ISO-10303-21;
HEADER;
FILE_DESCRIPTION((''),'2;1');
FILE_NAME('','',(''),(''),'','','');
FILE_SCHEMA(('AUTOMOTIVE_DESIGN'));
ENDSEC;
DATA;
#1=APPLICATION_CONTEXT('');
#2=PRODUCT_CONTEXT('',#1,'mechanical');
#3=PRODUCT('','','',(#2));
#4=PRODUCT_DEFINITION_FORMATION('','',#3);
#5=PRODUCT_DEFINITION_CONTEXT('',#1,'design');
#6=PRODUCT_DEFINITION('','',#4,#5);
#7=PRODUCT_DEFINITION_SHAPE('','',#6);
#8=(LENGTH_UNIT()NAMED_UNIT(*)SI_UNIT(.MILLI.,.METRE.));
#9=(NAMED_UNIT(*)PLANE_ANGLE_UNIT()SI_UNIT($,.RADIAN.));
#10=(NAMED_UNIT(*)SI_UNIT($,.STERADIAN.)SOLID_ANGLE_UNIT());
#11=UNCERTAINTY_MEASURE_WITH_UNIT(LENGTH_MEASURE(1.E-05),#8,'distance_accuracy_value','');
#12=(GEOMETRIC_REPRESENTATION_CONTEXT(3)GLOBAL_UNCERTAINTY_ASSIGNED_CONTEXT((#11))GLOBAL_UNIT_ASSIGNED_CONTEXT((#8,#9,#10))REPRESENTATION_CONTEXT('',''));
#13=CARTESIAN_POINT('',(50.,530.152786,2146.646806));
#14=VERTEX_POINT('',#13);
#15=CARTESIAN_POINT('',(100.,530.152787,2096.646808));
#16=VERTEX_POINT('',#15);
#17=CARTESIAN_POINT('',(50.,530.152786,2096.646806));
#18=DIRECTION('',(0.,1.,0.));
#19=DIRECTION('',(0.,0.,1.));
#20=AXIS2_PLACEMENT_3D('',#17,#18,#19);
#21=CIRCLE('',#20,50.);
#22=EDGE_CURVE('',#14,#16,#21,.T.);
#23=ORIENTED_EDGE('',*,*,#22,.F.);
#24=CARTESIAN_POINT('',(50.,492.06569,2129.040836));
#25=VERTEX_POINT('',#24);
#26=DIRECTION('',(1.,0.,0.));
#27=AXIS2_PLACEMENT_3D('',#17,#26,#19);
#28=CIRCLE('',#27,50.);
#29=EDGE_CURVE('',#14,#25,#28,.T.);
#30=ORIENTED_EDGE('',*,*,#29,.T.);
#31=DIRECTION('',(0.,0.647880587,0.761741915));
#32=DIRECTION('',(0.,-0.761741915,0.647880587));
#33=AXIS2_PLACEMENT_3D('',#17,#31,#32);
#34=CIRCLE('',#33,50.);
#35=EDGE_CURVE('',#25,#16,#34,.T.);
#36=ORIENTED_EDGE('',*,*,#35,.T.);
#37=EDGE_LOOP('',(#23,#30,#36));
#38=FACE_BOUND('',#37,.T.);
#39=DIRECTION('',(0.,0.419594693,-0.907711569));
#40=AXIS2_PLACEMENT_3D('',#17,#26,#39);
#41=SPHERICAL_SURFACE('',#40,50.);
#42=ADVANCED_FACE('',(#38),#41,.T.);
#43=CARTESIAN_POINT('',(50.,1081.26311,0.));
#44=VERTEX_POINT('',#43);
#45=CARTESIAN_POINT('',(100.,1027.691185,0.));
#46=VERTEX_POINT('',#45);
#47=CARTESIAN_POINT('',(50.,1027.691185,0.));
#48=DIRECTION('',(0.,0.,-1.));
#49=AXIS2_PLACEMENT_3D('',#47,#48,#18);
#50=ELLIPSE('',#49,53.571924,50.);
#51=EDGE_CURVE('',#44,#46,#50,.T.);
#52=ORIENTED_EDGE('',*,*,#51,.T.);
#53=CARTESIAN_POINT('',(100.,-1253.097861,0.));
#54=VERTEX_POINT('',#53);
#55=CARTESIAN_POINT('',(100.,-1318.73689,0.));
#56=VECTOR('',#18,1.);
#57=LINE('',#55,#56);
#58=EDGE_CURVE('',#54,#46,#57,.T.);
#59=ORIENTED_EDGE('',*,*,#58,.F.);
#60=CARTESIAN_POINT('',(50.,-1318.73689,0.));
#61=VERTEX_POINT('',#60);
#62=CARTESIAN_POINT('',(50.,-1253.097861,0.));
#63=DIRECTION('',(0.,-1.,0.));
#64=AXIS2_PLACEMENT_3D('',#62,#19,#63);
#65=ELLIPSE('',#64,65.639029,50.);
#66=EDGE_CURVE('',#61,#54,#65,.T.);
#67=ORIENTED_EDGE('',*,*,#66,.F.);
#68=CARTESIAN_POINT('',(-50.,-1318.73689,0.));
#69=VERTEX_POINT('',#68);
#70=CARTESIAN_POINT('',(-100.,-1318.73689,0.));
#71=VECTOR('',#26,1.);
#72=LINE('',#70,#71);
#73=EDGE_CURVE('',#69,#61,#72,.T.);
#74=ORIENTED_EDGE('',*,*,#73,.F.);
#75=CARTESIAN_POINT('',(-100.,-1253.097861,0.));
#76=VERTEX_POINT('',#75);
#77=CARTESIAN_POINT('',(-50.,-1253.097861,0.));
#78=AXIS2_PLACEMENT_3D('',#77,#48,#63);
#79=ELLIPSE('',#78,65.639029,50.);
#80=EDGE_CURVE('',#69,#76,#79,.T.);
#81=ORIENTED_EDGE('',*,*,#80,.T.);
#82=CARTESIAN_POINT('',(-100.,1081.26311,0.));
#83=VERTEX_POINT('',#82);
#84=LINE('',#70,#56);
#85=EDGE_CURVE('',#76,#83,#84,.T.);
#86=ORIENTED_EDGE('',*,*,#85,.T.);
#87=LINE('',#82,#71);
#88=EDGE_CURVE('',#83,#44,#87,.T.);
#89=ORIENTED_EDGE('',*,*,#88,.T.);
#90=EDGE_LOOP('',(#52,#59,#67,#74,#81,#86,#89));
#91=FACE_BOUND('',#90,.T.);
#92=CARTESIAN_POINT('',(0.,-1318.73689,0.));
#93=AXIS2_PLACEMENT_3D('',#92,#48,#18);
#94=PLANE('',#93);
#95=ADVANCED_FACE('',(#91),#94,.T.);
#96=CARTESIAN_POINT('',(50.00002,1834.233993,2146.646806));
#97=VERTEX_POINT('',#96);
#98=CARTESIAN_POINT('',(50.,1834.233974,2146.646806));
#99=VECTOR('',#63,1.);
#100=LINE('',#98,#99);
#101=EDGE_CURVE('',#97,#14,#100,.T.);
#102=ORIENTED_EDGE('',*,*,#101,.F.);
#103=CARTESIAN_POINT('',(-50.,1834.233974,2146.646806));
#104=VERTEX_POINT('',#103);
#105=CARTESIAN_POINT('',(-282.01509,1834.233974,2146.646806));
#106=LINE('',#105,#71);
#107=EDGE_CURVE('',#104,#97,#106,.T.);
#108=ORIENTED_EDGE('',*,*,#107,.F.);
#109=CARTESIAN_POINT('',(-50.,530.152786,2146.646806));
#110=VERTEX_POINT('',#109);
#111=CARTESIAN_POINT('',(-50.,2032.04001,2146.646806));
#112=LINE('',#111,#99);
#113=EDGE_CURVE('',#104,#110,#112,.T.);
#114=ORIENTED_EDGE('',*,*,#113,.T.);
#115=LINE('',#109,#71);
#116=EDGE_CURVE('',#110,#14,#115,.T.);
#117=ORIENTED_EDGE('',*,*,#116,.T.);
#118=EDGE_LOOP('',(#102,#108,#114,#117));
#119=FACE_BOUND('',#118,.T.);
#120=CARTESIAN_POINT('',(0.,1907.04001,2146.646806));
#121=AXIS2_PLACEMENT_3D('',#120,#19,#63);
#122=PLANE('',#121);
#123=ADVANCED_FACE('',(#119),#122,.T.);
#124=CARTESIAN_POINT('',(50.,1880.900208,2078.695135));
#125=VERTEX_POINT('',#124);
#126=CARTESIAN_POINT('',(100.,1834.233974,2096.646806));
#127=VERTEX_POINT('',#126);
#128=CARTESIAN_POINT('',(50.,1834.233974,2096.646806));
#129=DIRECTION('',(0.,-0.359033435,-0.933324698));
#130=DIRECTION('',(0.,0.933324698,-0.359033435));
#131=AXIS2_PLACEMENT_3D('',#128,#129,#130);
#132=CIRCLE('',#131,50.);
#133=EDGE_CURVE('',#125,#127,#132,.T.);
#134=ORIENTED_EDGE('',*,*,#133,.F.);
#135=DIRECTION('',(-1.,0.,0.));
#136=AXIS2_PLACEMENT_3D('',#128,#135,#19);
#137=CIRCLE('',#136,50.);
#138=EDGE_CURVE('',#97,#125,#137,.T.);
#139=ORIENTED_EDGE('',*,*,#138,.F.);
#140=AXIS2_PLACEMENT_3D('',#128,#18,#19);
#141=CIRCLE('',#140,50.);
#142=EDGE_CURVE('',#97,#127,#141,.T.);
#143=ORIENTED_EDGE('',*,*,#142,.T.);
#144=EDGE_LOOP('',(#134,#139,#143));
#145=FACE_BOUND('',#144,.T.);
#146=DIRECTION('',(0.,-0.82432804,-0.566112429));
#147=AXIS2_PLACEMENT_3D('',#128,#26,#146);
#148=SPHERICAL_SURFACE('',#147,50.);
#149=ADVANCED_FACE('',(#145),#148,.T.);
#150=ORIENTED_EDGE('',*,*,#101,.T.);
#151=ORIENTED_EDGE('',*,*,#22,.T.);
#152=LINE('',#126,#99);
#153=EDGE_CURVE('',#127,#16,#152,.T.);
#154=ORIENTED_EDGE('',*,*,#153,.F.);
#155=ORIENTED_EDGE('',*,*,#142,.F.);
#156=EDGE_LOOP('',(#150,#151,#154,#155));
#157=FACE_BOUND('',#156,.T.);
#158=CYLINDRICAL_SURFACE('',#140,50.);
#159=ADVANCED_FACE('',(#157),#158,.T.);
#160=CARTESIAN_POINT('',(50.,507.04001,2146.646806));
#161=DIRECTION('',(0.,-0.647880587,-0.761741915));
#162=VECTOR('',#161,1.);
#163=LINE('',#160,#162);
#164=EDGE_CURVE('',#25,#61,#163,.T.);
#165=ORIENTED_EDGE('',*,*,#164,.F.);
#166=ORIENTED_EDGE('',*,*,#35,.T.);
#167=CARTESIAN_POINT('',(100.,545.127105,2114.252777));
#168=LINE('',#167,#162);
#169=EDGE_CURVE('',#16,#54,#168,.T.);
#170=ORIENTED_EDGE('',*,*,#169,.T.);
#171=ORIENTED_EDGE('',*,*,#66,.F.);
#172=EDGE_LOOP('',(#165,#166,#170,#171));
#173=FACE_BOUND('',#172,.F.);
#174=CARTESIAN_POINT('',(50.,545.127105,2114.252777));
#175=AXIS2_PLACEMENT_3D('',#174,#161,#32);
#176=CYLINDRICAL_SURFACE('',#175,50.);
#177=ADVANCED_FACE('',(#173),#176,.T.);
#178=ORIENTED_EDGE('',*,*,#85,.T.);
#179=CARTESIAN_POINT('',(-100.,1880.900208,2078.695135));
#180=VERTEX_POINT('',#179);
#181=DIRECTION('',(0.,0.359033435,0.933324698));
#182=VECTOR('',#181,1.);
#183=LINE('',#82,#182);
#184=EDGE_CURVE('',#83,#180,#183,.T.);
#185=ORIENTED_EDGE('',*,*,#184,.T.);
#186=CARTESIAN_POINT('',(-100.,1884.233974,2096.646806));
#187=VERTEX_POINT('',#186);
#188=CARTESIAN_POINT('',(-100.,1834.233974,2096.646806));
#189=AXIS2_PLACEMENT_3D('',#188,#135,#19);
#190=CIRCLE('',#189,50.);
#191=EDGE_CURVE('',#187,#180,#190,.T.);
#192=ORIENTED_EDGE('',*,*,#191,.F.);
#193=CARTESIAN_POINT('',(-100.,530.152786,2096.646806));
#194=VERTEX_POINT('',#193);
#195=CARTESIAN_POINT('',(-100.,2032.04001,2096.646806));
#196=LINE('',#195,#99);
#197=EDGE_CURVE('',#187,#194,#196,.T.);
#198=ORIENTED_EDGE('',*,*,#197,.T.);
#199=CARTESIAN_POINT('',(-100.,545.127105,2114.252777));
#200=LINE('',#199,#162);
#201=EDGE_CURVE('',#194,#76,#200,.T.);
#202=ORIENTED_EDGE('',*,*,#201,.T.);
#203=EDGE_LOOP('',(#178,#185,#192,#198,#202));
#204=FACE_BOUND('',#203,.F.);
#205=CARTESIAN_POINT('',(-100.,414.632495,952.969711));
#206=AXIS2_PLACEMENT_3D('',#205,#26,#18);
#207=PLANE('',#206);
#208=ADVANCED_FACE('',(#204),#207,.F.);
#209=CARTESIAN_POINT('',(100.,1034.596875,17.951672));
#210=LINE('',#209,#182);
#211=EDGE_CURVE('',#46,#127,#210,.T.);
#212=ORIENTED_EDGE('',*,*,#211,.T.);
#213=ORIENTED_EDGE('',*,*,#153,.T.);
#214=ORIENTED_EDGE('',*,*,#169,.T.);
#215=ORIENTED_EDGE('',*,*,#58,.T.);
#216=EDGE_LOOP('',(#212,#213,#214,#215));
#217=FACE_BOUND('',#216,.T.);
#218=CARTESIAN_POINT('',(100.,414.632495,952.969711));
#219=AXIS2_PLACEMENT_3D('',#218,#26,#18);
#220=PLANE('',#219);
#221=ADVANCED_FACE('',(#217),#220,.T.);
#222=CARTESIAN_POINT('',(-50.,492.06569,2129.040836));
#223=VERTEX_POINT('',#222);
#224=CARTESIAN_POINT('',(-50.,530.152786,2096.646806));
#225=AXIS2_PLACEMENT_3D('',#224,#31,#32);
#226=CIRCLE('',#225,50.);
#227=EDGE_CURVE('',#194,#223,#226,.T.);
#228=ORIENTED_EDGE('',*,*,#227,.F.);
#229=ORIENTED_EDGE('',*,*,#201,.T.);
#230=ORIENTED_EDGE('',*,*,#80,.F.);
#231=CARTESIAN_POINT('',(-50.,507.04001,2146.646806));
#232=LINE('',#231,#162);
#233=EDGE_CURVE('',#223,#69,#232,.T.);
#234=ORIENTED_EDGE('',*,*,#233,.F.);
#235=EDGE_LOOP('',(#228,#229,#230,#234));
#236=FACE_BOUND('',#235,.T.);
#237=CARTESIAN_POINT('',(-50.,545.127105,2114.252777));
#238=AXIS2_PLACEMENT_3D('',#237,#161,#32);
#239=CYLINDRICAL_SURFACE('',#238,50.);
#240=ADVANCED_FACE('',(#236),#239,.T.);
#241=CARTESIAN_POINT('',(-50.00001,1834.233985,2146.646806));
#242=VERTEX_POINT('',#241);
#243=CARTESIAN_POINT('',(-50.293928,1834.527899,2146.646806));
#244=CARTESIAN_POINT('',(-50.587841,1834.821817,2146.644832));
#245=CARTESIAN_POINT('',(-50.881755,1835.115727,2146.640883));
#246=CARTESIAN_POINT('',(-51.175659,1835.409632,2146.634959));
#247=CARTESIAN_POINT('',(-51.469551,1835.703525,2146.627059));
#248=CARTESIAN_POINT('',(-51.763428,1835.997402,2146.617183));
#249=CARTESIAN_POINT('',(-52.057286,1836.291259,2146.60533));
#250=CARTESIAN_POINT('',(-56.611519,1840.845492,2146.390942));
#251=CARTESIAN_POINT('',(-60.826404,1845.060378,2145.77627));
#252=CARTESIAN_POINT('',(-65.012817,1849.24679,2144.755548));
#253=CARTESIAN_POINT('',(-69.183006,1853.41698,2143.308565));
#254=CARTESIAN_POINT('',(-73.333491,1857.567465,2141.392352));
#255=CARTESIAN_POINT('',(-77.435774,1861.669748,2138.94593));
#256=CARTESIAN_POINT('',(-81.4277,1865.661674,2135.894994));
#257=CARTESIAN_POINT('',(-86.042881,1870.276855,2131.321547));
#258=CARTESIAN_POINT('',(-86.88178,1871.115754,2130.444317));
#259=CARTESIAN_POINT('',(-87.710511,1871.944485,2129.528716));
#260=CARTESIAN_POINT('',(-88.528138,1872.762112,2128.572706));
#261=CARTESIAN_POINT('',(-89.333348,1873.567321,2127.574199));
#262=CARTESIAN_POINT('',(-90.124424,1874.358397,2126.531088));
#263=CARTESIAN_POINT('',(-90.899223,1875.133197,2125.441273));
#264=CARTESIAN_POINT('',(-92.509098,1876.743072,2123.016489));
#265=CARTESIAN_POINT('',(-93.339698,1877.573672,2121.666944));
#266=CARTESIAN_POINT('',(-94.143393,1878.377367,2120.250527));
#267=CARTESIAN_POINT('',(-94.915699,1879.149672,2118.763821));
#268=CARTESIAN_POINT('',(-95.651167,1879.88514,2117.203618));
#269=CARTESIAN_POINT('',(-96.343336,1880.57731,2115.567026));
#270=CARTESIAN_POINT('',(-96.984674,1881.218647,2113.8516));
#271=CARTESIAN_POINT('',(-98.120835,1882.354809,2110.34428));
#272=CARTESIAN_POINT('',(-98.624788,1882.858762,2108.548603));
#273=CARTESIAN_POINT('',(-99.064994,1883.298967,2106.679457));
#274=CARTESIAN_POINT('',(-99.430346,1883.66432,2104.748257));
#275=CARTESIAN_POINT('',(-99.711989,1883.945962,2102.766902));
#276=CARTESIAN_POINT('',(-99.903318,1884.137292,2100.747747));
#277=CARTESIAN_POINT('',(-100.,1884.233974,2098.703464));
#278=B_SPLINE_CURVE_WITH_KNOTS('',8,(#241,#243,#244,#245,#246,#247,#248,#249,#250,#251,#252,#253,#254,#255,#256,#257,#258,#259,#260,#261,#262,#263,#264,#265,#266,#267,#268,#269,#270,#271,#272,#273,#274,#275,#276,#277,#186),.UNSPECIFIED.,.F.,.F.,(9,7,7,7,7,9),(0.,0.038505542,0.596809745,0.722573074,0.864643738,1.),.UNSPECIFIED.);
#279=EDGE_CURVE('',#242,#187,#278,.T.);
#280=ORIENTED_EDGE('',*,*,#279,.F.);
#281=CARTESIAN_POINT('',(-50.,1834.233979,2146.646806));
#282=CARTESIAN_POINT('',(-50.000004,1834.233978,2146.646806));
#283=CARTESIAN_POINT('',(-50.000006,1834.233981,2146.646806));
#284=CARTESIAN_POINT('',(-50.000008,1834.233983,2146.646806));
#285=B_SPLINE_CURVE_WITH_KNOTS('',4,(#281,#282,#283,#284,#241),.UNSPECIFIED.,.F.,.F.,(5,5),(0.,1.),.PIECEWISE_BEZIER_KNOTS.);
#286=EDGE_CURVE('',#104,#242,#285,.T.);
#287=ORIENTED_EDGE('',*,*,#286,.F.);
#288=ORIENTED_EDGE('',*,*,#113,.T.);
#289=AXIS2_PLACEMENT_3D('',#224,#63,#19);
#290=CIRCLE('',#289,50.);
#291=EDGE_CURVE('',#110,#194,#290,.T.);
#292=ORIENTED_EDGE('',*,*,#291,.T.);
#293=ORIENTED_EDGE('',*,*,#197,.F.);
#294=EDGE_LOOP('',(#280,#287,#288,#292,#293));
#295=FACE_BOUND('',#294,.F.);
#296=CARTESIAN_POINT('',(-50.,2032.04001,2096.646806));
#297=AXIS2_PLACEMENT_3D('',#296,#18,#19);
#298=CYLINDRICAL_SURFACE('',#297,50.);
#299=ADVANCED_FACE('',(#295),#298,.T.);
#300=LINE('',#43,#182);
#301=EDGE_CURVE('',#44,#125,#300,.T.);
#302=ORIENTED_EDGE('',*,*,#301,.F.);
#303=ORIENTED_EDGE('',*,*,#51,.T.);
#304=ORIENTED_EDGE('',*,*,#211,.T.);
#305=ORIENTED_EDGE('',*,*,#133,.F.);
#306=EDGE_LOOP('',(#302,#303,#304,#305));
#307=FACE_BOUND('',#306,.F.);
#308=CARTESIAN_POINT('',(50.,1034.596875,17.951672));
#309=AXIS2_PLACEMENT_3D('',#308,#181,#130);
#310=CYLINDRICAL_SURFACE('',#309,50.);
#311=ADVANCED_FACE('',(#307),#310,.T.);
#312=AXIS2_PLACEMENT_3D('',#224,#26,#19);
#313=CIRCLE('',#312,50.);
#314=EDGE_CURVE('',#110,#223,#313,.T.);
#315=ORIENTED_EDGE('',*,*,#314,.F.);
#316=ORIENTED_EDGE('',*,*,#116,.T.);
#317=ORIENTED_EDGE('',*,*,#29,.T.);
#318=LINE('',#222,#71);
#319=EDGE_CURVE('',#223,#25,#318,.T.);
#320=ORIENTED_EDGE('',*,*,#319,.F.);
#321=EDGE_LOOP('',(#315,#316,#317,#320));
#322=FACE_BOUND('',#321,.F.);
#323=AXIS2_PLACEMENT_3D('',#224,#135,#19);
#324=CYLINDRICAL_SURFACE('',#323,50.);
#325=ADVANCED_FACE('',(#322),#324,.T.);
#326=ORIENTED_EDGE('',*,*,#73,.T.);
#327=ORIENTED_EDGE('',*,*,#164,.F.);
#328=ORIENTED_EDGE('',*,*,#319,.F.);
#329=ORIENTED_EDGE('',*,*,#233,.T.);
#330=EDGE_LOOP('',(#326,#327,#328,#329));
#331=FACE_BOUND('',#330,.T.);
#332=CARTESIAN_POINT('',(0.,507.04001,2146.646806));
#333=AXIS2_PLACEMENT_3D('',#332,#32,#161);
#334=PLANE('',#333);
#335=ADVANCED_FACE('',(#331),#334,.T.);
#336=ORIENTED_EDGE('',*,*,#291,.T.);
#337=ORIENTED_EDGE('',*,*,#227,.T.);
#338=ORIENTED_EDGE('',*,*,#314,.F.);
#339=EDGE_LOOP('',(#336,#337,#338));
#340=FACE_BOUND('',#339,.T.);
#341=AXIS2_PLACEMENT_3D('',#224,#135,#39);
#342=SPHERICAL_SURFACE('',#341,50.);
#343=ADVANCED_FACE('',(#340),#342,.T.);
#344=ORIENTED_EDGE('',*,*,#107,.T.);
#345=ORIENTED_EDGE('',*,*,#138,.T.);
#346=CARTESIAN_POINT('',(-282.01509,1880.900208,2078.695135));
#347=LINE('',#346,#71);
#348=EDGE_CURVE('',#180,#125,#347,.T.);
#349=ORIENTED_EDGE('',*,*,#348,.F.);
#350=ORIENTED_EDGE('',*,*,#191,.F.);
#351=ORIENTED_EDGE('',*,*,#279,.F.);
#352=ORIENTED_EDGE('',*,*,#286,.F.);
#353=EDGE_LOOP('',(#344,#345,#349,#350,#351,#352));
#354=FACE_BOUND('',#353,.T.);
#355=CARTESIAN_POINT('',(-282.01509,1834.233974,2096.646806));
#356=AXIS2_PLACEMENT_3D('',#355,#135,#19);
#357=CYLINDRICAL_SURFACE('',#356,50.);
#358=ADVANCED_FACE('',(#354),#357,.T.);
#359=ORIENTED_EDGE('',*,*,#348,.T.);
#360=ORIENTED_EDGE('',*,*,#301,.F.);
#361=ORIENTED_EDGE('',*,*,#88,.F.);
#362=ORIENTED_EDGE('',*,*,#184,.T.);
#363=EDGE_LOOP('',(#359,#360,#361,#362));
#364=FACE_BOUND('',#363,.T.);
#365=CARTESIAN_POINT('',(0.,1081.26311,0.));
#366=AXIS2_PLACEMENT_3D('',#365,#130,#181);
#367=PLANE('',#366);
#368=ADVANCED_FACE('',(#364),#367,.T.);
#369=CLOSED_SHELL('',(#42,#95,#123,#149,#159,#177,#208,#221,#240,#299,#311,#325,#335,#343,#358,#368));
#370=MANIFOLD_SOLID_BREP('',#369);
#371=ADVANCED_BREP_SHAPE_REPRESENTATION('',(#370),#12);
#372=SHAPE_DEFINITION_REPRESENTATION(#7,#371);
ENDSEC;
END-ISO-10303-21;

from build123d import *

# Parameters (mm, degrees)
F2_DEPTH     = 100
F3_R         = 50
F4_T1_DEPTH  = 1304.0811873082
F4_T3_DEPTH  = 1501.8872234652
F4_T5_DEPTH  = 332.0150903927
F4_T7_DEPTH  = 100
F4_T12_DEPTH = 50
F4_T18_DEPTH = 50
F4_T24_DEPTH = 50


# Not quite as in the source:
# - a fillet or chamfer that OpenCascade refuses, or shapes differently, is made with other operations: its cross-section is extruded or revolved along the edge and cut away or added


with BuildPart() as f2:
    # F0 (on Right) → F2 (new body, symmetric)
    with BuildSketch(Plane.YZ):
        Polygon((507.0400096967, 2146.646806384), (-1318.7368903443, 0), (1081.2631096557, 0), (1907.0400096967, 2146.646806384), align=None)
    extrude(amount=F2_DEPTH, both=True)

    # F3
    f3_edges = [f2.edges().sort_by_distance(p)[0] for p in [
        (-100, -405.84844, 1073.323403),
        (100, -405.84844, 1073.323403),
        (100, 1494.15156, 1073.323403),
    ]]
    fillet(f3_edges, radius=F3_R)

    # F4: fillet of radius 50 on 4 edges, made by hand

    # F4_s2 → F4_t1 (cut)
    with BuildSketch(Plane.XZ.offset(-1834.2339735396)):
        with BuildLine():
            ThreePointArc((50, 2146.646806384), (85.3553390593, 2132.0021454433), (100, 2096.646806384))
            Line((100, 2096.646806384), (100, 2146.646806384))
            Line((100, 2146.646806384), (50, 2146.646806384))
        make_face()
    extrude(amount=F4_T1_DEPTH, mode=Mode.SUBTRACT)

    # F4_s4 → F4_t3 (cut)
    with BuildSketch(Plane.XZ.offset(-2032.0400096967)):
        with BuildLine():
            ThreePointArc((-50, 2146.646806384), (-85.3553390593, 2132.0021454433), (-100, 2096.646806384))
            Line((-100, 2096.646806384), (-100, 2146.646806384))
            Line((-100, 2146.646806384), (-50, 2146.646806384))
        make_face()
    extrude(amount=F4_T3_DEPTH, mode=Mode.SUBTRACT)

    # F4_s6 → F4_t5 (cut)
    with BuildSketch(Plane.YZ.offset(-282.0150903927)):
        with BuildLine():
            ThreePointArc((1834.2339735396, 2146.646806384), (1875.4503755357, 2124.9524278487), (1880.900208461, 2078.695134644))
            Line((1880.900208461, 2078.695134644), (1907.0400096967, 2146.646806384))
            Line((1907.0400096967, 2146.646806384), (1834.2339735396, 2146.646806384))
        make_face()
    extrude(amount=F4_T5_DEPTH, mode=Mode.SUBTRACT)

    # F4_s8 → F4_t7 (cut)
    with BuildSketch(Plane.YZ.offset(-50)):
        with BuildLine():
            ThreePointArc((530.1527862314, 2146.646806384), (509.1730515679, 2142.0323848583), (492.0656904737, 2129.0408357219))
            Line((492.0656904737, 2129.0408357219), (507.0400096967, 2146.646806384))
            Line((507.0400096967, 2146.646806384), (530.1527862314, 2146.646806384))
        make_face()
    extrude(amount=F4_T7_DEPTH, mode=Mode.SUBTRACT)


with BuildPart() as f4_tool10:
    # F4_s11 → F4_t12 (new body)
    with BuildSketch(Plane.YZ.offset(-50)):
        Polygon((530.1527862314, 2096.646806384), (492.0656904737, 2129.0408357219), (507.0400096967, 2146.646806384), (530.1527862314, 2146.646806384), align=None)
    extrude(amount=-F4_T12_DEPTH)

    # F4_s13 → F4_t14 (revolve, cut)
    with BuildSketch(Plane(origin=(-50, 530.1527862314, 2096.646806384), x_dir=(0, 0.4195946933, -0.9077115695), z_dir=(0, 0.9077115695, 0.4195946933))):
        with BuildLine():
            ThreePointArc((0, -50), (50, 0), (0, 50))
            Line((0, 50), (0, -50))
        make_face()
    revolve(axis=Axis((-50, 530.1527862314, 2096.646806384), (-1, 0, 0)), mode=Mode.SUBTRACT)


with BuildPart() as f2_1:
    add(f2.part)

    # F4_t9: cut F4_tool10
    add(f4_tool10.part, mode=Mode.SUBTRACT)


with BuildPart() as f4_tool16:
    # F4_s17 → F4_t18 (new body)
    with BuildSketch(Plane.YZ.offset(50)):
        Polygon((530.1527862314, 2096.646806384), (530.1527862314, 2146.646806384), (507.0400096967, 2146.646806384), (492.0656904737, 2129.0408357219), align=None)
    extrude(amount=F4_T18_DEPTH)

    # F4_s19 → F4_t20 (revolve, cut)
    with BuildSketch(Plane(origin=(50, 530.1527862314, 2096.646806384), x_dir=(0, 0.4195946933, -0.9077115695), z_dir=(0, -0.9077115695, -0.4195946933))):
        with BuildLine():
            ThreePointArc((0, -50), (50, 0), (0, 50))
            Line((0, 50), (0, -50))
        make_face()
    revolve(axis=Axis((50, 530.1527862314, 2096.646806384), (1, 0, 0)), mode=Mode.SUBTRACT)


with BuildPart() as f2_2:
    add(f2_1.part)

    # F4_t15: cut F4_tool16
    add(f4_tool16.part, mode=Mode.SUBTRACT)


with BuildPart() as f4_tool22:
    # F4_s23 → F4_t24 (new body)
    with BuildSketch(Plane.YZ.offset(50)):
        Polygon((1834.2339735396, 2096.646806384), (1834.2339735396, 2146.646806384), (1907.0400096967, 2146.646806384), (1880.900208461, 2078.695134644), align=None)
    extrude(amount=F4_T24_DEPTH)

    # F4_s25 → F4_t26 (revolve, cut)
    with BuildSketch(Plane(origin=(50, 1834.2339735396, 2096.646806384), x_dir=(0, -0.8243280399, -0.5661124293), z_dir=(0, -0.5661124293, 0.8243280399))):
        with BuildLine():
            ThreePointArc((0, -50), (50, 0), (0, 50))
            Line((0, 50), (0, -50))
        make_face()
    revolve(axis=Axis((50, 1834.2339735396, 2096.646806384), (1, 0, 0)), mode=Mode.SUBTRACT)


with BuildPart() as f2_3:
    add(f2_2.part)

    # F4_t21: cut F4_tool22
    add(f4_tool22.part, mode=Mode.SUBTRACT)


solid = f2_3.part
